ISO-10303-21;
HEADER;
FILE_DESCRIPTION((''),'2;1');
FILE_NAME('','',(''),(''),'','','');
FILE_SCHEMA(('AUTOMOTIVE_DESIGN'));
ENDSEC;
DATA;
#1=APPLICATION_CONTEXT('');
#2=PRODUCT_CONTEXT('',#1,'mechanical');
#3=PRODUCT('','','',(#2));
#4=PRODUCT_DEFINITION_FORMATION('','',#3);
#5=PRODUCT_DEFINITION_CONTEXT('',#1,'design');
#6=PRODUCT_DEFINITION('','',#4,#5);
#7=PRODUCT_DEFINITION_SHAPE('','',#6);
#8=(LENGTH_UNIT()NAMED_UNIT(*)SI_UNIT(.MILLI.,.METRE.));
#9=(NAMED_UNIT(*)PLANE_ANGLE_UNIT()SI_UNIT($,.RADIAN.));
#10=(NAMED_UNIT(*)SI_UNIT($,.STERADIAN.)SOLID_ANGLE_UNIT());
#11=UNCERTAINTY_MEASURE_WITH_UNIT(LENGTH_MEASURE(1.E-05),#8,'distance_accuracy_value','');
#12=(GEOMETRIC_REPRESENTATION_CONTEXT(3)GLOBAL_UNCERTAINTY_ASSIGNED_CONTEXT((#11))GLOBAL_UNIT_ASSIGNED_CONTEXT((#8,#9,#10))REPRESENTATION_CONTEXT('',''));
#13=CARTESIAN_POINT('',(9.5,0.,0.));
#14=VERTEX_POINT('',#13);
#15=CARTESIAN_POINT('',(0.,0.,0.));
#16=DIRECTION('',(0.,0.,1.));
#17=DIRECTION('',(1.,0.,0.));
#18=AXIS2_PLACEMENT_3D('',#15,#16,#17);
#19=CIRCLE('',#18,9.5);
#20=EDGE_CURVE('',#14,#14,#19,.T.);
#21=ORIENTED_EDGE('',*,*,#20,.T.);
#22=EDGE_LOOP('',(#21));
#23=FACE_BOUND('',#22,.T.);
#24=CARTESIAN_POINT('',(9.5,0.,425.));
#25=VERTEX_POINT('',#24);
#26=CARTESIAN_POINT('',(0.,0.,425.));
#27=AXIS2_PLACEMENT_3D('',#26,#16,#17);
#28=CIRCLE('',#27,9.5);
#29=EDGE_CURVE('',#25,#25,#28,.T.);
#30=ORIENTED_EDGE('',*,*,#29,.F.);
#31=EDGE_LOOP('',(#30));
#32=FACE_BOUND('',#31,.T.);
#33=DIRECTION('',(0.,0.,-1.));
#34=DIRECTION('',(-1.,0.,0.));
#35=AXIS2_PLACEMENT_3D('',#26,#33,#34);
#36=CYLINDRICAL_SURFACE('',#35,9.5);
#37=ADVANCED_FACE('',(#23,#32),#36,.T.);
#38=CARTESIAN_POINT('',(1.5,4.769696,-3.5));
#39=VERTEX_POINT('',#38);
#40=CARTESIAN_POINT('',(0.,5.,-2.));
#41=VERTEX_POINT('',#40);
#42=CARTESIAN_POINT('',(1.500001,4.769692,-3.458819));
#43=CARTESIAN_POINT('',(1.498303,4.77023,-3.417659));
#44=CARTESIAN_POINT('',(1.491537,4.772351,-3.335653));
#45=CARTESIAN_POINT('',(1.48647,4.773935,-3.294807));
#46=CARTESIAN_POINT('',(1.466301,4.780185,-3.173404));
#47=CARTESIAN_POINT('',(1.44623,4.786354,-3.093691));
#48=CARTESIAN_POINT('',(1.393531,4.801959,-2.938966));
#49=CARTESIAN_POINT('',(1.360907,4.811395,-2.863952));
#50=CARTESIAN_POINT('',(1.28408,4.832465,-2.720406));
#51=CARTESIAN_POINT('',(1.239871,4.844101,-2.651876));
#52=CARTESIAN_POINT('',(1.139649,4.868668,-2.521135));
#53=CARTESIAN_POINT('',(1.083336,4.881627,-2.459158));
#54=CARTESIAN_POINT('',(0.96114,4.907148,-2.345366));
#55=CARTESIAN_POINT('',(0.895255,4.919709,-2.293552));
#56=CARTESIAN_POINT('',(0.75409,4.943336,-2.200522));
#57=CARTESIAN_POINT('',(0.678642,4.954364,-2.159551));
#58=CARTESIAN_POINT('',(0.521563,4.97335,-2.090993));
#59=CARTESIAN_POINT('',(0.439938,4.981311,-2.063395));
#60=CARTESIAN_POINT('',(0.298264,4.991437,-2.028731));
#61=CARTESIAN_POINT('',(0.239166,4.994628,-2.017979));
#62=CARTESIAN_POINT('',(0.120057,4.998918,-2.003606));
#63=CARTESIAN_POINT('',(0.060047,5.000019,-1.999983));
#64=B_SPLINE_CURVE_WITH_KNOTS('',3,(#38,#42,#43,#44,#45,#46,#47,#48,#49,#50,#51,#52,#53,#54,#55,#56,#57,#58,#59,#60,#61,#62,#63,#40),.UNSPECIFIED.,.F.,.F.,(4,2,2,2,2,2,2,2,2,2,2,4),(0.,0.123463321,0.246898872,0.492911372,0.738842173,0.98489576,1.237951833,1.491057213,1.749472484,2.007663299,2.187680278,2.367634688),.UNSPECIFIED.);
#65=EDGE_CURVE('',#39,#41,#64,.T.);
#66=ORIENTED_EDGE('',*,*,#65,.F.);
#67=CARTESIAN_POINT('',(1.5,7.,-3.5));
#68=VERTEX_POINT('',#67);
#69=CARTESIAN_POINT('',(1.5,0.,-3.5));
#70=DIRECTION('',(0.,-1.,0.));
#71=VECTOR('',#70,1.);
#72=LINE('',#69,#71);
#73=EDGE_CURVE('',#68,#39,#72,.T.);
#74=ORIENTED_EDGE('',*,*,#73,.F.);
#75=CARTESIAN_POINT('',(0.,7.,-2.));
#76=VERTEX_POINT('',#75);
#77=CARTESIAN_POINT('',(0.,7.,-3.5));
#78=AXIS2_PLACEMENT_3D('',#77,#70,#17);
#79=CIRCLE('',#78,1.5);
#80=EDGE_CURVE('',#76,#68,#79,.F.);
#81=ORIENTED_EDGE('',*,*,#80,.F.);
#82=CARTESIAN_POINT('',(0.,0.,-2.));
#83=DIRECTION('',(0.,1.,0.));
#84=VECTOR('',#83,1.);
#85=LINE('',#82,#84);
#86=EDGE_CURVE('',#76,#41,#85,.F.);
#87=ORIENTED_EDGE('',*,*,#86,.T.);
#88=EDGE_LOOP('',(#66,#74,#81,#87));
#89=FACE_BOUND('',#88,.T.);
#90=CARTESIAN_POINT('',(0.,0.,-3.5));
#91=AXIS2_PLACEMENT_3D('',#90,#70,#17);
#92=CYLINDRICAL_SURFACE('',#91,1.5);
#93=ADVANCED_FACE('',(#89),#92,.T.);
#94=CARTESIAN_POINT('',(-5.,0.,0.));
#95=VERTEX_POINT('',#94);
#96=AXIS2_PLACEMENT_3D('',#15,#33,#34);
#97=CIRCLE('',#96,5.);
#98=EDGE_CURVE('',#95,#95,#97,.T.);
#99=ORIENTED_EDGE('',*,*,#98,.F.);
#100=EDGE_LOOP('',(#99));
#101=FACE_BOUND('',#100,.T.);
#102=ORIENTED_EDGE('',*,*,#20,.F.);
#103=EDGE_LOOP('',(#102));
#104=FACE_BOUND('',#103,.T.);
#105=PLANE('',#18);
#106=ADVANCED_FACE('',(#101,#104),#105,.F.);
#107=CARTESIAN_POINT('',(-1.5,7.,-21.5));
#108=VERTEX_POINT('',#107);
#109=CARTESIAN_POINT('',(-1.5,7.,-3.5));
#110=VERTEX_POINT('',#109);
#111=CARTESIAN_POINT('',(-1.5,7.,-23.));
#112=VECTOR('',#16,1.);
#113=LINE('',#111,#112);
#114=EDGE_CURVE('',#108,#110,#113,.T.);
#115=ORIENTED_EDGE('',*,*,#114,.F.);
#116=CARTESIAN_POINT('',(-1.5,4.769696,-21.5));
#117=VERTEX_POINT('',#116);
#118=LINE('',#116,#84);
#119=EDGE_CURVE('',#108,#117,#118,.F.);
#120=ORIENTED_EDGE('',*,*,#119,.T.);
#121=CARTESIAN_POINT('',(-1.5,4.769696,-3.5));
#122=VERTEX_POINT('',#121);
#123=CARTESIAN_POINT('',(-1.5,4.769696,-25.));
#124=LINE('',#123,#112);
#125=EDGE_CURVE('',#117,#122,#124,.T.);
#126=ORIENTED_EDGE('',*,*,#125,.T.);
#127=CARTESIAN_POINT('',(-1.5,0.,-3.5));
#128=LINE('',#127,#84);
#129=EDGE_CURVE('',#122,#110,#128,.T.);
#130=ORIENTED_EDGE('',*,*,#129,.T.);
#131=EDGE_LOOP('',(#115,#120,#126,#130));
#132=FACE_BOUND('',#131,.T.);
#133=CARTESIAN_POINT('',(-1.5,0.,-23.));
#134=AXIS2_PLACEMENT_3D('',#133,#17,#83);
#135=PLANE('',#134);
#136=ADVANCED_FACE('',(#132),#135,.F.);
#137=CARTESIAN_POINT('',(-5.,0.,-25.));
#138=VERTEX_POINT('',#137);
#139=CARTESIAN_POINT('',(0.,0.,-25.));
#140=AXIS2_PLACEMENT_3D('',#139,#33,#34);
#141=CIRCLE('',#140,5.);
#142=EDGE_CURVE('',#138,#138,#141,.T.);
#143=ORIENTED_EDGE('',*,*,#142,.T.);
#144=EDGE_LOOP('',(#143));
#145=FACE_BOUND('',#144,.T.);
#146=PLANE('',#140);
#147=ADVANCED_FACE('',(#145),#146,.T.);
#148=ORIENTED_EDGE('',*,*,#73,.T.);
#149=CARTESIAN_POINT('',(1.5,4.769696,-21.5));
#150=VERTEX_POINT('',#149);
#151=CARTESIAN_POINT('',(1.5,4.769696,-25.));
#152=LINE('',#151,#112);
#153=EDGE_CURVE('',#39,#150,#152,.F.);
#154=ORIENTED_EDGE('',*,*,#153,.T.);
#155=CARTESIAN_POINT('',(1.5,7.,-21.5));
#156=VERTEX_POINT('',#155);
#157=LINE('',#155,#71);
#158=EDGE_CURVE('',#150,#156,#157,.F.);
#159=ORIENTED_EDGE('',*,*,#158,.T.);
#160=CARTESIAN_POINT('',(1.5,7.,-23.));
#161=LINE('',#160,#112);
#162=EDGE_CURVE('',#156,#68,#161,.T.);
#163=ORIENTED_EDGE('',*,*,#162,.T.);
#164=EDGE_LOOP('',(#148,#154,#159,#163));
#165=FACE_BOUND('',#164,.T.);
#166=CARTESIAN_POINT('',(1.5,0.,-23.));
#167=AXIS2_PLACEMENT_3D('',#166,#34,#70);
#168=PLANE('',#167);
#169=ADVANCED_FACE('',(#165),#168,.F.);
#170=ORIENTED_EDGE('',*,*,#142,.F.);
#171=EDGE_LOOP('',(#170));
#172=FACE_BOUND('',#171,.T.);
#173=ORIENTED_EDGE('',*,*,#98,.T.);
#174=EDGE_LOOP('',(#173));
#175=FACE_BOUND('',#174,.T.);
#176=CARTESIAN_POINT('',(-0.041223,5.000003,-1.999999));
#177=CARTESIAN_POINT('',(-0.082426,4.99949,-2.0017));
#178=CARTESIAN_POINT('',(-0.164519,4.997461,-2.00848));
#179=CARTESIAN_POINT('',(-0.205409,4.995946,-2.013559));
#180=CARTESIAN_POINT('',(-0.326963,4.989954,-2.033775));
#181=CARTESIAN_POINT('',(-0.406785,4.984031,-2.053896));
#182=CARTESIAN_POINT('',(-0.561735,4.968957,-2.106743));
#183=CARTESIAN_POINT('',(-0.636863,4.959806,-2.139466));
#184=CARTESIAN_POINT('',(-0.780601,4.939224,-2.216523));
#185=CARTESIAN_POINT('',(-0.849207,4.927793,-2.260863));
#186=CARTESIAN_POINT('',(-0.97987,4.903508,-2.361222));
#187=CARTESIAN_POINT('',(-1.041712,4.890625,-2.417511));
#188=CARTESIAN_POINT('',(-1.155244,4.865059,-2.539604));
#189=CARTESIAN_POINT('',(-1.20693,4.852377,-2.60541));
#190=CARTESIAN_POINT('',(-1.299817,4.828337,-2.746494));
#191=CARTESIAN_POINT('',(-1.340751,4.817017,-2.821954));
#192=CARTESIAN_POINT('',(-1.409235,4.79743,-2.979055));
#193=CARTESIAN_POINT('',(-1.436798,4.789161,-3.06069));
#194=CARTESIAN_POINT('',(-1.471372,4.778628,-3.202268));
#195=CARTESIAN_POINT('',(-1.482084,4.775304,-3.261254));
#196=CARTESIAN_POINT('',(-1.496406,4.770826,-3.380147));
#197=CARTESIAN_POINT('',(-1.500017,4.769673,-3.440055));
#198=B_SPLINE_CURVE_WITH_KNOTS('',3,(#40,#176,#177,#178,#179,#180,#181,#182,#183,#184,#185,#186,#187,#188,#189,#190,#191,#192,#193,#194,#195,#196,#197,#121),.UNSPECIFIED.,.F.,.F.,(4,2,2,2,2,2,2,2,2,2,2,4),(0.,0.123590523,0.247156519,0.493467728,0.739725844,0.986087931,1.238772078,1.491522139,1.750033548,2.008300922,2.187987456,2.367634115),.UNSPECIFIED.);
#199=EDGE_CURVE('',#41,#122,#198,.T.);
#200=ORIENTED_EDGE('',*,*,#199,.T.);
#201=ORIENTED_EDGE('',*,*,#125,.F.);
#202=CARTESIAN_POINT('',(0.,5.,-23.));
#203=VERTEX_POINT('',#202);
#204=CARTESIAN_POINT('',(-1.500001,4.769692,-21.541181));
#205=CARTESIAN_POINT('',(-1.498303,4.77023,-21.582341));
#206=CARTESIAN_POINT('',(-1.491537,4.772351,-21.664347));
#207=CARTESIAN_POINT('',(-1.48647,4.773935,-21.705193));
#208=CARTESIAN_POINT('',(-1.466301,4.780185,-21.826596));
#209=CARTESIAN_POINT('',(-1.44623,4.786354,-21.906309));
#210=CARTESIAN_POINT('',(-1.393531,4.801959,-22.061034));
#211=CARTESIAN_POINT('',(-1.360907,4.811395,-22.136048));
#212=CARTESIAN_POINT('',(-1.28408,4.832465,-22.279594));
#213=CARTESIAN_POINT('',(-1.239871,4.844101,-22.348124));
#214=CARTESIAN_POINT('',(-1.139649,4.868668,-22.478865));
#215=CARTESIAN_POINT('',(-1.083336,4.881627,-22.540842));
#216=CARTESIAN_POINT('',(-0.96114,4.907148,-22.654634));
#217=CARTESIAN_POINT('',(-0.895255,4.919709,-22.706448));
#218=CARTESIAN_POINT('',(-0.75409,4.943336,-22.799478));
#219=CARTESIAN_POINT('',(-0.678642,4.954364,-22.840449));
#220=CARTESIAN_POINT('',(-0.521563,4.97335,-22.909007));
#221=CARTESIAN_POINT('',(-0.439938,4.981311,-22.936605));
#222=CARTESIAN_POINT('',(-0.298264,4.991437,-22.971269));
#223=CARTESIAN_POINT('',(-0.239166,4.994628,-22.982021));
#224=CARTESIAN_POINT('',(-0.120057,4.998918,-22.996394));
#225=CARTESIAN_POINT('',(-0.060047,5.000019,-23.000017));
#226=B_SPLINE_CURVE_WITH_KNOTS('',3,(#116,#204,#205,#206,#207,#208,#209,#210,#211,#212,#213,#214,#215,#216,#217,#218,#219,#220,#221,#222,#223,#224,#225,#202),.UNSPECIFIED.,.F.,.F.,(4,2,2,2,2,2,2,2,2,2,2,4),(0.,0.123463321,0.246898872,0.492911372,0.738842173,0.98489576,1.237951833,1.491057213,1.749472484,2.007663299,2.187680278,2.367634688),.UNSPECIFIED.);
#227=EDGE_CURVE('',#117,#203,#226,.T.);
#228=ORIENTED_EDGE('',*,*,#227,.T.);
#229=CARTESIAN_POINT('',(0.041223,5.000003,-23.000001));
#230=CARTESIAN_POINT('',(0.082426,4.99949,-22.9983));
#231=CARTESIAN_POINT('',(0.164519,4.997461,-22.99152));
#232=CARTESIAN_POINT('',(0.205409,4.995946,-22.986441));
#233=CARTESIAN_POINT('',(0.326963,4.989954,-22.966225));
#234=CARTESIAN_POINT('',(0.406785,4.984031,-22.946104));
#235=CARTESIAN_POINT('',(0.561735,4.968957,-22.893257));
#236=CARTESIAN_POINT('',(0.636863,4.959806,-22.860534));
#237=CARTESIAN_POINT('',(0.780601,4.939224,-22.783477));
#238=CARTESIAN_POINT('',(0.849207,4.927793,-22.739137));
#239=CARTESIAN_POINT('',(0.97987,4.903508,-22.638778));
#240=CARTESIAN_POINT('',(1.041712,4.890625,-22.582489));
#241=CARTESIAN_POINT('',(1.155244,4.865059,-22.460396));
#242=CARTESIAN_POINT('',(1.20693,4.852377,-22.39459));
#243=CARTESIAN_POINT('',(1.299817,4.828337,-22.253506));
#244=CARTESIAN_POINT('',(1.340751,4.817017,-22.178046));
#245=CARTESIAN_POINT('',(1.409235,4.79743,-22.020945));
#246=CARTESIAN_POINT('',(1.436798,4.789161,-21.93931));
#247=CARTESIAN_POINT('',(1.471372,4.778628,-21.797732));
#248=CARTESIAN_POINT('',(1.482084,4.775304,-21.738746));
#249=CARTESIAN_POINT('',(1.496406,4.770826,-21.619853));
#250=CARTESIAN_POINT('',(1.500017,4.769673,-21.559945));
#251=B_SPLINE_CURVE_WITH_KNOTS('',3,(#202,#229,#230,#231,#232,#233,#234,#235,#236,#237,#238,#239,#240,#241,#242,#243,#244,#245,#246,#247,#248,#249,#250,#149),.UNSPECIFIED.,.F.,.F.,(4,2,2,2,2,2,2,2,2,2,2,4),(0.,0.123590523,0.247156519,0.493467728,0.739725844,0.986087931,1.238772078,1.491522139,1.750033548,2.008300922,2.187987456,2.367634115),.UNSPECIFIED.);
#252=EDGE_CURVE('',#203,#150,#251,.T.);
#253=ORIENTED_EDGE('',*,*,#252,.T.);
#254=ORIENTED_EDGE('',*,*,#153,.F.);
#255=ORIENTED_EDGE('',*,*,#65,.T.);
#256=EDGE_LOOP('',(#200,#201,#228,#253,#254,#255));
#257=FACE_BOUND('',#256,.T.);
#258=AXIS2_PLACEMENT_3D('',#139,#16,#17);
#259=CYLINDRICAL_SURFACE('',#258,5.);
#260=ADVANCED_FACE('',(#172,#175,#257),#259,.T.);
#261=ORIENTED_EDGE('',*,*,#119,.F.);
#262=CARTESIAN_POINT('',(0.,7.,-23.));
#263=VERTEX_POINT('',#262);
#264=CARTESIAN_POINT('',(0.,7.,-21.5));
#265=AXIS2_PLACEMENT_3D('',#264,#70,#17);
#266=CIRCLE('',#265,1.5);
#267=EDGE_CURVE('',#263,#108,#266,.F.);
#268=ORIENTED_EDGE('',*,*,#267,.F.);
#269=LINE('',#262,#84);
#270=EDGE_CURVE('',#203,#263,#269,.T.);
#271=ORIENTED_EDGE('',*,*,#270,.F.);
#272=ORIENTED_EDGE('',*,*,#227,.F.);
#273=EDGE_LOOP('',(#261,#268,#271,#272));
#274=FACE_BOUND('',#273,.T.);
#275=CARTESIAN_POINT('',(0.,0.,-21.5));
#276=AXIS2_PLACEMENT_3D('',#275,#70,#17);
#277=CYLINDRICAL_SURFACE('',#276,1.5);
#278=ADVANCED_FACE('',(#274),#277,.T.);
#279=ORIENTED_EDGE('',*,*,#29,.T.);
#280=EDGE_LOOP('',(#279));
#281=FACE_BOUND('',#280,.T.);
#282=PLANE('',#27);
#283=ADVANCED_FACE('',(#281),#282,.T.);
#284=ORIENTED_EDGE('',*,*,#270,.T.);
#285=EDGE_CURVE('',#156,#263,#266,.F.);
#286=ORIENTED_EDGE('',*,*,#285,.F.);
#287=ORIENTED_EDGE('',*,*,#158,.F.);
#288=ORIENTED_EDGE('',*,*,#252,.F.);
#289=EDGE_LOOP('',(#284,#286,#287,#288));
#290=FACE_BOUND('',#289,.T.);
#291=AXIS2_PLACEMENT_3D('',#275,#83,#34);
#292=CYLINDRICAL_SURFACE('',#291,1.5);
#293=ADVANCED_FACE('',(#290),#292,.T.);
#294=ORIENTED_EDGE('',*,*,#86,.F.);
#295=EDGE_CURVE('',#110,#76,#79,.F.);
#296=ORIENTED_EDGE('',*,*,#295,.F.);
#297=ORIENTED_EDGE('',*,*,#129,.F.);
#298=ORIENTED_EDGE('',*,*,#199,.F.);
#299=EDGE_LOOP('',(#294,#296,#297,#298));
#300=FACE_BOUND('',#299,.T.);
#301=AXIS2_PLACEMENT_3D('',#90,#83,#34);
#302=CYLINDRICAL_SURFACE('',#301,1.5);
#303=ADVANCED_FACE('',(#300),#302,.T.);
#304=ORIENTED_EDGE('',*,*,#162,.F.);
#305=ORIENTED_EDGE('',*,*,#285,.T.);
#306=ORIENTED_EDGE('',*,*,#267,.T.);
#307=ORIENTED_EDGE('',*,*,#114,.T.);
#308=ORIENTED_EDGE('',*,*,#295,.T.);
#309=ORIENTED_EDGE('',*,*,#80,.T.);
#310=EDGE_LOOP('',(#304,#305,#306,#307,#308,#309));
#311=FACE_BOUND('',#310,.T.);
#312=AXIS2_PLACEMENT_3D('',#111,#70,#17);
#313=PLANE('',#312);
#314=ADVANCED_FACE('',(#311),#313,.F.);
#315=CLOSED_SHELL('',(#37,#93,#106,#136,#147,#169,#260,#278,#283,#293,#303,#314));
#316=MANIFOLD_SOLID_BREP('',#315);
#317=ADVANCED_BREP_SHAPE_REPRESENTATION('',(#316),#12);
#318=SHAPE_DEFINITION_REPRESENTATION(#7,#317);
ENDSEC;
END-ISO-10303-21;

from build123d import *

# Parameters (mm, degrees)
SZKIC1_R                    = 9.5
DODANIE_WYCI_GNI_CIE1_DEPTH = 425
SZKIC2_R                    = 5
DODANIE_WYCI_GNI_CIE2_DEPTH = 25
SZKIC3_W                    = 3
SZKIC3_H                    = 7
DODANIE_WYCI_GNI_CIE3_DEPTH = 21
ZAOKR_GLENIE2_R             = 1.5
ZAOKR_GLENIE3_R             = 1.5


with BuildPart() as part:
    # Szkic1 → Dodanie-wyciągnięcie1 (new body)
    with BuildSketch(Plane.XY):
        Circle(SZKIC1_R)
    extrude(amount=DODANIE_WYCI_GNI_CIE1_DEPTH)

    # Szkic2 → Dodanie-wyciągnięcie2 (add)
    with BuildSketch(Plane(origin=(0, 0, 0), x_dir=(-1, 0, 0), z_dir=(0, 0, -1))):
        Circle(SZKIC2_R)
    extrude(amount=DODANIE_WYCI_GNI_CIE2_DEPTH)

    # Szkic3 → Dodanie-wyciągnięcie3 (add)
    with BuildSketch(Plane(origin=(0, 0, -2), x_dir=(-1, 0, 0), z_dir=(0, 0, -1))):
        with Locations((0, 3.5)):
            Rectangle(SZKIC3_W, SZKIC3_H)
    extrude(amount=DODANIE_WYCI_GNI_CIE3_DEPTH)

    # Zaokrąglenie2
    zaokr_glenie2_edges = [part.edges().sort_by_distance(p)[0] for p in [
        (-1.5, 5.884848004, -23),
    ]]
    fillet(zaokr_glenie2_edges, radius=ZAOKR_GLENIE2_R)

    # Zaokrąglenie3
    zaokr_glenie3_edges = [part.edges().sort_by_distance(p)[0] for p in [
        (1.5, 5.884848004, -2),
        (-1.5, 5.884848004, -2),
        (1.5, 5.884848004, -23),
    ]]
    fillet(zaokr_glenie3_edges, radius=ZAOKR_GLENIE3_R - 0.0001)  # a hair under: the kernel refuses the full size


solid = part.part
